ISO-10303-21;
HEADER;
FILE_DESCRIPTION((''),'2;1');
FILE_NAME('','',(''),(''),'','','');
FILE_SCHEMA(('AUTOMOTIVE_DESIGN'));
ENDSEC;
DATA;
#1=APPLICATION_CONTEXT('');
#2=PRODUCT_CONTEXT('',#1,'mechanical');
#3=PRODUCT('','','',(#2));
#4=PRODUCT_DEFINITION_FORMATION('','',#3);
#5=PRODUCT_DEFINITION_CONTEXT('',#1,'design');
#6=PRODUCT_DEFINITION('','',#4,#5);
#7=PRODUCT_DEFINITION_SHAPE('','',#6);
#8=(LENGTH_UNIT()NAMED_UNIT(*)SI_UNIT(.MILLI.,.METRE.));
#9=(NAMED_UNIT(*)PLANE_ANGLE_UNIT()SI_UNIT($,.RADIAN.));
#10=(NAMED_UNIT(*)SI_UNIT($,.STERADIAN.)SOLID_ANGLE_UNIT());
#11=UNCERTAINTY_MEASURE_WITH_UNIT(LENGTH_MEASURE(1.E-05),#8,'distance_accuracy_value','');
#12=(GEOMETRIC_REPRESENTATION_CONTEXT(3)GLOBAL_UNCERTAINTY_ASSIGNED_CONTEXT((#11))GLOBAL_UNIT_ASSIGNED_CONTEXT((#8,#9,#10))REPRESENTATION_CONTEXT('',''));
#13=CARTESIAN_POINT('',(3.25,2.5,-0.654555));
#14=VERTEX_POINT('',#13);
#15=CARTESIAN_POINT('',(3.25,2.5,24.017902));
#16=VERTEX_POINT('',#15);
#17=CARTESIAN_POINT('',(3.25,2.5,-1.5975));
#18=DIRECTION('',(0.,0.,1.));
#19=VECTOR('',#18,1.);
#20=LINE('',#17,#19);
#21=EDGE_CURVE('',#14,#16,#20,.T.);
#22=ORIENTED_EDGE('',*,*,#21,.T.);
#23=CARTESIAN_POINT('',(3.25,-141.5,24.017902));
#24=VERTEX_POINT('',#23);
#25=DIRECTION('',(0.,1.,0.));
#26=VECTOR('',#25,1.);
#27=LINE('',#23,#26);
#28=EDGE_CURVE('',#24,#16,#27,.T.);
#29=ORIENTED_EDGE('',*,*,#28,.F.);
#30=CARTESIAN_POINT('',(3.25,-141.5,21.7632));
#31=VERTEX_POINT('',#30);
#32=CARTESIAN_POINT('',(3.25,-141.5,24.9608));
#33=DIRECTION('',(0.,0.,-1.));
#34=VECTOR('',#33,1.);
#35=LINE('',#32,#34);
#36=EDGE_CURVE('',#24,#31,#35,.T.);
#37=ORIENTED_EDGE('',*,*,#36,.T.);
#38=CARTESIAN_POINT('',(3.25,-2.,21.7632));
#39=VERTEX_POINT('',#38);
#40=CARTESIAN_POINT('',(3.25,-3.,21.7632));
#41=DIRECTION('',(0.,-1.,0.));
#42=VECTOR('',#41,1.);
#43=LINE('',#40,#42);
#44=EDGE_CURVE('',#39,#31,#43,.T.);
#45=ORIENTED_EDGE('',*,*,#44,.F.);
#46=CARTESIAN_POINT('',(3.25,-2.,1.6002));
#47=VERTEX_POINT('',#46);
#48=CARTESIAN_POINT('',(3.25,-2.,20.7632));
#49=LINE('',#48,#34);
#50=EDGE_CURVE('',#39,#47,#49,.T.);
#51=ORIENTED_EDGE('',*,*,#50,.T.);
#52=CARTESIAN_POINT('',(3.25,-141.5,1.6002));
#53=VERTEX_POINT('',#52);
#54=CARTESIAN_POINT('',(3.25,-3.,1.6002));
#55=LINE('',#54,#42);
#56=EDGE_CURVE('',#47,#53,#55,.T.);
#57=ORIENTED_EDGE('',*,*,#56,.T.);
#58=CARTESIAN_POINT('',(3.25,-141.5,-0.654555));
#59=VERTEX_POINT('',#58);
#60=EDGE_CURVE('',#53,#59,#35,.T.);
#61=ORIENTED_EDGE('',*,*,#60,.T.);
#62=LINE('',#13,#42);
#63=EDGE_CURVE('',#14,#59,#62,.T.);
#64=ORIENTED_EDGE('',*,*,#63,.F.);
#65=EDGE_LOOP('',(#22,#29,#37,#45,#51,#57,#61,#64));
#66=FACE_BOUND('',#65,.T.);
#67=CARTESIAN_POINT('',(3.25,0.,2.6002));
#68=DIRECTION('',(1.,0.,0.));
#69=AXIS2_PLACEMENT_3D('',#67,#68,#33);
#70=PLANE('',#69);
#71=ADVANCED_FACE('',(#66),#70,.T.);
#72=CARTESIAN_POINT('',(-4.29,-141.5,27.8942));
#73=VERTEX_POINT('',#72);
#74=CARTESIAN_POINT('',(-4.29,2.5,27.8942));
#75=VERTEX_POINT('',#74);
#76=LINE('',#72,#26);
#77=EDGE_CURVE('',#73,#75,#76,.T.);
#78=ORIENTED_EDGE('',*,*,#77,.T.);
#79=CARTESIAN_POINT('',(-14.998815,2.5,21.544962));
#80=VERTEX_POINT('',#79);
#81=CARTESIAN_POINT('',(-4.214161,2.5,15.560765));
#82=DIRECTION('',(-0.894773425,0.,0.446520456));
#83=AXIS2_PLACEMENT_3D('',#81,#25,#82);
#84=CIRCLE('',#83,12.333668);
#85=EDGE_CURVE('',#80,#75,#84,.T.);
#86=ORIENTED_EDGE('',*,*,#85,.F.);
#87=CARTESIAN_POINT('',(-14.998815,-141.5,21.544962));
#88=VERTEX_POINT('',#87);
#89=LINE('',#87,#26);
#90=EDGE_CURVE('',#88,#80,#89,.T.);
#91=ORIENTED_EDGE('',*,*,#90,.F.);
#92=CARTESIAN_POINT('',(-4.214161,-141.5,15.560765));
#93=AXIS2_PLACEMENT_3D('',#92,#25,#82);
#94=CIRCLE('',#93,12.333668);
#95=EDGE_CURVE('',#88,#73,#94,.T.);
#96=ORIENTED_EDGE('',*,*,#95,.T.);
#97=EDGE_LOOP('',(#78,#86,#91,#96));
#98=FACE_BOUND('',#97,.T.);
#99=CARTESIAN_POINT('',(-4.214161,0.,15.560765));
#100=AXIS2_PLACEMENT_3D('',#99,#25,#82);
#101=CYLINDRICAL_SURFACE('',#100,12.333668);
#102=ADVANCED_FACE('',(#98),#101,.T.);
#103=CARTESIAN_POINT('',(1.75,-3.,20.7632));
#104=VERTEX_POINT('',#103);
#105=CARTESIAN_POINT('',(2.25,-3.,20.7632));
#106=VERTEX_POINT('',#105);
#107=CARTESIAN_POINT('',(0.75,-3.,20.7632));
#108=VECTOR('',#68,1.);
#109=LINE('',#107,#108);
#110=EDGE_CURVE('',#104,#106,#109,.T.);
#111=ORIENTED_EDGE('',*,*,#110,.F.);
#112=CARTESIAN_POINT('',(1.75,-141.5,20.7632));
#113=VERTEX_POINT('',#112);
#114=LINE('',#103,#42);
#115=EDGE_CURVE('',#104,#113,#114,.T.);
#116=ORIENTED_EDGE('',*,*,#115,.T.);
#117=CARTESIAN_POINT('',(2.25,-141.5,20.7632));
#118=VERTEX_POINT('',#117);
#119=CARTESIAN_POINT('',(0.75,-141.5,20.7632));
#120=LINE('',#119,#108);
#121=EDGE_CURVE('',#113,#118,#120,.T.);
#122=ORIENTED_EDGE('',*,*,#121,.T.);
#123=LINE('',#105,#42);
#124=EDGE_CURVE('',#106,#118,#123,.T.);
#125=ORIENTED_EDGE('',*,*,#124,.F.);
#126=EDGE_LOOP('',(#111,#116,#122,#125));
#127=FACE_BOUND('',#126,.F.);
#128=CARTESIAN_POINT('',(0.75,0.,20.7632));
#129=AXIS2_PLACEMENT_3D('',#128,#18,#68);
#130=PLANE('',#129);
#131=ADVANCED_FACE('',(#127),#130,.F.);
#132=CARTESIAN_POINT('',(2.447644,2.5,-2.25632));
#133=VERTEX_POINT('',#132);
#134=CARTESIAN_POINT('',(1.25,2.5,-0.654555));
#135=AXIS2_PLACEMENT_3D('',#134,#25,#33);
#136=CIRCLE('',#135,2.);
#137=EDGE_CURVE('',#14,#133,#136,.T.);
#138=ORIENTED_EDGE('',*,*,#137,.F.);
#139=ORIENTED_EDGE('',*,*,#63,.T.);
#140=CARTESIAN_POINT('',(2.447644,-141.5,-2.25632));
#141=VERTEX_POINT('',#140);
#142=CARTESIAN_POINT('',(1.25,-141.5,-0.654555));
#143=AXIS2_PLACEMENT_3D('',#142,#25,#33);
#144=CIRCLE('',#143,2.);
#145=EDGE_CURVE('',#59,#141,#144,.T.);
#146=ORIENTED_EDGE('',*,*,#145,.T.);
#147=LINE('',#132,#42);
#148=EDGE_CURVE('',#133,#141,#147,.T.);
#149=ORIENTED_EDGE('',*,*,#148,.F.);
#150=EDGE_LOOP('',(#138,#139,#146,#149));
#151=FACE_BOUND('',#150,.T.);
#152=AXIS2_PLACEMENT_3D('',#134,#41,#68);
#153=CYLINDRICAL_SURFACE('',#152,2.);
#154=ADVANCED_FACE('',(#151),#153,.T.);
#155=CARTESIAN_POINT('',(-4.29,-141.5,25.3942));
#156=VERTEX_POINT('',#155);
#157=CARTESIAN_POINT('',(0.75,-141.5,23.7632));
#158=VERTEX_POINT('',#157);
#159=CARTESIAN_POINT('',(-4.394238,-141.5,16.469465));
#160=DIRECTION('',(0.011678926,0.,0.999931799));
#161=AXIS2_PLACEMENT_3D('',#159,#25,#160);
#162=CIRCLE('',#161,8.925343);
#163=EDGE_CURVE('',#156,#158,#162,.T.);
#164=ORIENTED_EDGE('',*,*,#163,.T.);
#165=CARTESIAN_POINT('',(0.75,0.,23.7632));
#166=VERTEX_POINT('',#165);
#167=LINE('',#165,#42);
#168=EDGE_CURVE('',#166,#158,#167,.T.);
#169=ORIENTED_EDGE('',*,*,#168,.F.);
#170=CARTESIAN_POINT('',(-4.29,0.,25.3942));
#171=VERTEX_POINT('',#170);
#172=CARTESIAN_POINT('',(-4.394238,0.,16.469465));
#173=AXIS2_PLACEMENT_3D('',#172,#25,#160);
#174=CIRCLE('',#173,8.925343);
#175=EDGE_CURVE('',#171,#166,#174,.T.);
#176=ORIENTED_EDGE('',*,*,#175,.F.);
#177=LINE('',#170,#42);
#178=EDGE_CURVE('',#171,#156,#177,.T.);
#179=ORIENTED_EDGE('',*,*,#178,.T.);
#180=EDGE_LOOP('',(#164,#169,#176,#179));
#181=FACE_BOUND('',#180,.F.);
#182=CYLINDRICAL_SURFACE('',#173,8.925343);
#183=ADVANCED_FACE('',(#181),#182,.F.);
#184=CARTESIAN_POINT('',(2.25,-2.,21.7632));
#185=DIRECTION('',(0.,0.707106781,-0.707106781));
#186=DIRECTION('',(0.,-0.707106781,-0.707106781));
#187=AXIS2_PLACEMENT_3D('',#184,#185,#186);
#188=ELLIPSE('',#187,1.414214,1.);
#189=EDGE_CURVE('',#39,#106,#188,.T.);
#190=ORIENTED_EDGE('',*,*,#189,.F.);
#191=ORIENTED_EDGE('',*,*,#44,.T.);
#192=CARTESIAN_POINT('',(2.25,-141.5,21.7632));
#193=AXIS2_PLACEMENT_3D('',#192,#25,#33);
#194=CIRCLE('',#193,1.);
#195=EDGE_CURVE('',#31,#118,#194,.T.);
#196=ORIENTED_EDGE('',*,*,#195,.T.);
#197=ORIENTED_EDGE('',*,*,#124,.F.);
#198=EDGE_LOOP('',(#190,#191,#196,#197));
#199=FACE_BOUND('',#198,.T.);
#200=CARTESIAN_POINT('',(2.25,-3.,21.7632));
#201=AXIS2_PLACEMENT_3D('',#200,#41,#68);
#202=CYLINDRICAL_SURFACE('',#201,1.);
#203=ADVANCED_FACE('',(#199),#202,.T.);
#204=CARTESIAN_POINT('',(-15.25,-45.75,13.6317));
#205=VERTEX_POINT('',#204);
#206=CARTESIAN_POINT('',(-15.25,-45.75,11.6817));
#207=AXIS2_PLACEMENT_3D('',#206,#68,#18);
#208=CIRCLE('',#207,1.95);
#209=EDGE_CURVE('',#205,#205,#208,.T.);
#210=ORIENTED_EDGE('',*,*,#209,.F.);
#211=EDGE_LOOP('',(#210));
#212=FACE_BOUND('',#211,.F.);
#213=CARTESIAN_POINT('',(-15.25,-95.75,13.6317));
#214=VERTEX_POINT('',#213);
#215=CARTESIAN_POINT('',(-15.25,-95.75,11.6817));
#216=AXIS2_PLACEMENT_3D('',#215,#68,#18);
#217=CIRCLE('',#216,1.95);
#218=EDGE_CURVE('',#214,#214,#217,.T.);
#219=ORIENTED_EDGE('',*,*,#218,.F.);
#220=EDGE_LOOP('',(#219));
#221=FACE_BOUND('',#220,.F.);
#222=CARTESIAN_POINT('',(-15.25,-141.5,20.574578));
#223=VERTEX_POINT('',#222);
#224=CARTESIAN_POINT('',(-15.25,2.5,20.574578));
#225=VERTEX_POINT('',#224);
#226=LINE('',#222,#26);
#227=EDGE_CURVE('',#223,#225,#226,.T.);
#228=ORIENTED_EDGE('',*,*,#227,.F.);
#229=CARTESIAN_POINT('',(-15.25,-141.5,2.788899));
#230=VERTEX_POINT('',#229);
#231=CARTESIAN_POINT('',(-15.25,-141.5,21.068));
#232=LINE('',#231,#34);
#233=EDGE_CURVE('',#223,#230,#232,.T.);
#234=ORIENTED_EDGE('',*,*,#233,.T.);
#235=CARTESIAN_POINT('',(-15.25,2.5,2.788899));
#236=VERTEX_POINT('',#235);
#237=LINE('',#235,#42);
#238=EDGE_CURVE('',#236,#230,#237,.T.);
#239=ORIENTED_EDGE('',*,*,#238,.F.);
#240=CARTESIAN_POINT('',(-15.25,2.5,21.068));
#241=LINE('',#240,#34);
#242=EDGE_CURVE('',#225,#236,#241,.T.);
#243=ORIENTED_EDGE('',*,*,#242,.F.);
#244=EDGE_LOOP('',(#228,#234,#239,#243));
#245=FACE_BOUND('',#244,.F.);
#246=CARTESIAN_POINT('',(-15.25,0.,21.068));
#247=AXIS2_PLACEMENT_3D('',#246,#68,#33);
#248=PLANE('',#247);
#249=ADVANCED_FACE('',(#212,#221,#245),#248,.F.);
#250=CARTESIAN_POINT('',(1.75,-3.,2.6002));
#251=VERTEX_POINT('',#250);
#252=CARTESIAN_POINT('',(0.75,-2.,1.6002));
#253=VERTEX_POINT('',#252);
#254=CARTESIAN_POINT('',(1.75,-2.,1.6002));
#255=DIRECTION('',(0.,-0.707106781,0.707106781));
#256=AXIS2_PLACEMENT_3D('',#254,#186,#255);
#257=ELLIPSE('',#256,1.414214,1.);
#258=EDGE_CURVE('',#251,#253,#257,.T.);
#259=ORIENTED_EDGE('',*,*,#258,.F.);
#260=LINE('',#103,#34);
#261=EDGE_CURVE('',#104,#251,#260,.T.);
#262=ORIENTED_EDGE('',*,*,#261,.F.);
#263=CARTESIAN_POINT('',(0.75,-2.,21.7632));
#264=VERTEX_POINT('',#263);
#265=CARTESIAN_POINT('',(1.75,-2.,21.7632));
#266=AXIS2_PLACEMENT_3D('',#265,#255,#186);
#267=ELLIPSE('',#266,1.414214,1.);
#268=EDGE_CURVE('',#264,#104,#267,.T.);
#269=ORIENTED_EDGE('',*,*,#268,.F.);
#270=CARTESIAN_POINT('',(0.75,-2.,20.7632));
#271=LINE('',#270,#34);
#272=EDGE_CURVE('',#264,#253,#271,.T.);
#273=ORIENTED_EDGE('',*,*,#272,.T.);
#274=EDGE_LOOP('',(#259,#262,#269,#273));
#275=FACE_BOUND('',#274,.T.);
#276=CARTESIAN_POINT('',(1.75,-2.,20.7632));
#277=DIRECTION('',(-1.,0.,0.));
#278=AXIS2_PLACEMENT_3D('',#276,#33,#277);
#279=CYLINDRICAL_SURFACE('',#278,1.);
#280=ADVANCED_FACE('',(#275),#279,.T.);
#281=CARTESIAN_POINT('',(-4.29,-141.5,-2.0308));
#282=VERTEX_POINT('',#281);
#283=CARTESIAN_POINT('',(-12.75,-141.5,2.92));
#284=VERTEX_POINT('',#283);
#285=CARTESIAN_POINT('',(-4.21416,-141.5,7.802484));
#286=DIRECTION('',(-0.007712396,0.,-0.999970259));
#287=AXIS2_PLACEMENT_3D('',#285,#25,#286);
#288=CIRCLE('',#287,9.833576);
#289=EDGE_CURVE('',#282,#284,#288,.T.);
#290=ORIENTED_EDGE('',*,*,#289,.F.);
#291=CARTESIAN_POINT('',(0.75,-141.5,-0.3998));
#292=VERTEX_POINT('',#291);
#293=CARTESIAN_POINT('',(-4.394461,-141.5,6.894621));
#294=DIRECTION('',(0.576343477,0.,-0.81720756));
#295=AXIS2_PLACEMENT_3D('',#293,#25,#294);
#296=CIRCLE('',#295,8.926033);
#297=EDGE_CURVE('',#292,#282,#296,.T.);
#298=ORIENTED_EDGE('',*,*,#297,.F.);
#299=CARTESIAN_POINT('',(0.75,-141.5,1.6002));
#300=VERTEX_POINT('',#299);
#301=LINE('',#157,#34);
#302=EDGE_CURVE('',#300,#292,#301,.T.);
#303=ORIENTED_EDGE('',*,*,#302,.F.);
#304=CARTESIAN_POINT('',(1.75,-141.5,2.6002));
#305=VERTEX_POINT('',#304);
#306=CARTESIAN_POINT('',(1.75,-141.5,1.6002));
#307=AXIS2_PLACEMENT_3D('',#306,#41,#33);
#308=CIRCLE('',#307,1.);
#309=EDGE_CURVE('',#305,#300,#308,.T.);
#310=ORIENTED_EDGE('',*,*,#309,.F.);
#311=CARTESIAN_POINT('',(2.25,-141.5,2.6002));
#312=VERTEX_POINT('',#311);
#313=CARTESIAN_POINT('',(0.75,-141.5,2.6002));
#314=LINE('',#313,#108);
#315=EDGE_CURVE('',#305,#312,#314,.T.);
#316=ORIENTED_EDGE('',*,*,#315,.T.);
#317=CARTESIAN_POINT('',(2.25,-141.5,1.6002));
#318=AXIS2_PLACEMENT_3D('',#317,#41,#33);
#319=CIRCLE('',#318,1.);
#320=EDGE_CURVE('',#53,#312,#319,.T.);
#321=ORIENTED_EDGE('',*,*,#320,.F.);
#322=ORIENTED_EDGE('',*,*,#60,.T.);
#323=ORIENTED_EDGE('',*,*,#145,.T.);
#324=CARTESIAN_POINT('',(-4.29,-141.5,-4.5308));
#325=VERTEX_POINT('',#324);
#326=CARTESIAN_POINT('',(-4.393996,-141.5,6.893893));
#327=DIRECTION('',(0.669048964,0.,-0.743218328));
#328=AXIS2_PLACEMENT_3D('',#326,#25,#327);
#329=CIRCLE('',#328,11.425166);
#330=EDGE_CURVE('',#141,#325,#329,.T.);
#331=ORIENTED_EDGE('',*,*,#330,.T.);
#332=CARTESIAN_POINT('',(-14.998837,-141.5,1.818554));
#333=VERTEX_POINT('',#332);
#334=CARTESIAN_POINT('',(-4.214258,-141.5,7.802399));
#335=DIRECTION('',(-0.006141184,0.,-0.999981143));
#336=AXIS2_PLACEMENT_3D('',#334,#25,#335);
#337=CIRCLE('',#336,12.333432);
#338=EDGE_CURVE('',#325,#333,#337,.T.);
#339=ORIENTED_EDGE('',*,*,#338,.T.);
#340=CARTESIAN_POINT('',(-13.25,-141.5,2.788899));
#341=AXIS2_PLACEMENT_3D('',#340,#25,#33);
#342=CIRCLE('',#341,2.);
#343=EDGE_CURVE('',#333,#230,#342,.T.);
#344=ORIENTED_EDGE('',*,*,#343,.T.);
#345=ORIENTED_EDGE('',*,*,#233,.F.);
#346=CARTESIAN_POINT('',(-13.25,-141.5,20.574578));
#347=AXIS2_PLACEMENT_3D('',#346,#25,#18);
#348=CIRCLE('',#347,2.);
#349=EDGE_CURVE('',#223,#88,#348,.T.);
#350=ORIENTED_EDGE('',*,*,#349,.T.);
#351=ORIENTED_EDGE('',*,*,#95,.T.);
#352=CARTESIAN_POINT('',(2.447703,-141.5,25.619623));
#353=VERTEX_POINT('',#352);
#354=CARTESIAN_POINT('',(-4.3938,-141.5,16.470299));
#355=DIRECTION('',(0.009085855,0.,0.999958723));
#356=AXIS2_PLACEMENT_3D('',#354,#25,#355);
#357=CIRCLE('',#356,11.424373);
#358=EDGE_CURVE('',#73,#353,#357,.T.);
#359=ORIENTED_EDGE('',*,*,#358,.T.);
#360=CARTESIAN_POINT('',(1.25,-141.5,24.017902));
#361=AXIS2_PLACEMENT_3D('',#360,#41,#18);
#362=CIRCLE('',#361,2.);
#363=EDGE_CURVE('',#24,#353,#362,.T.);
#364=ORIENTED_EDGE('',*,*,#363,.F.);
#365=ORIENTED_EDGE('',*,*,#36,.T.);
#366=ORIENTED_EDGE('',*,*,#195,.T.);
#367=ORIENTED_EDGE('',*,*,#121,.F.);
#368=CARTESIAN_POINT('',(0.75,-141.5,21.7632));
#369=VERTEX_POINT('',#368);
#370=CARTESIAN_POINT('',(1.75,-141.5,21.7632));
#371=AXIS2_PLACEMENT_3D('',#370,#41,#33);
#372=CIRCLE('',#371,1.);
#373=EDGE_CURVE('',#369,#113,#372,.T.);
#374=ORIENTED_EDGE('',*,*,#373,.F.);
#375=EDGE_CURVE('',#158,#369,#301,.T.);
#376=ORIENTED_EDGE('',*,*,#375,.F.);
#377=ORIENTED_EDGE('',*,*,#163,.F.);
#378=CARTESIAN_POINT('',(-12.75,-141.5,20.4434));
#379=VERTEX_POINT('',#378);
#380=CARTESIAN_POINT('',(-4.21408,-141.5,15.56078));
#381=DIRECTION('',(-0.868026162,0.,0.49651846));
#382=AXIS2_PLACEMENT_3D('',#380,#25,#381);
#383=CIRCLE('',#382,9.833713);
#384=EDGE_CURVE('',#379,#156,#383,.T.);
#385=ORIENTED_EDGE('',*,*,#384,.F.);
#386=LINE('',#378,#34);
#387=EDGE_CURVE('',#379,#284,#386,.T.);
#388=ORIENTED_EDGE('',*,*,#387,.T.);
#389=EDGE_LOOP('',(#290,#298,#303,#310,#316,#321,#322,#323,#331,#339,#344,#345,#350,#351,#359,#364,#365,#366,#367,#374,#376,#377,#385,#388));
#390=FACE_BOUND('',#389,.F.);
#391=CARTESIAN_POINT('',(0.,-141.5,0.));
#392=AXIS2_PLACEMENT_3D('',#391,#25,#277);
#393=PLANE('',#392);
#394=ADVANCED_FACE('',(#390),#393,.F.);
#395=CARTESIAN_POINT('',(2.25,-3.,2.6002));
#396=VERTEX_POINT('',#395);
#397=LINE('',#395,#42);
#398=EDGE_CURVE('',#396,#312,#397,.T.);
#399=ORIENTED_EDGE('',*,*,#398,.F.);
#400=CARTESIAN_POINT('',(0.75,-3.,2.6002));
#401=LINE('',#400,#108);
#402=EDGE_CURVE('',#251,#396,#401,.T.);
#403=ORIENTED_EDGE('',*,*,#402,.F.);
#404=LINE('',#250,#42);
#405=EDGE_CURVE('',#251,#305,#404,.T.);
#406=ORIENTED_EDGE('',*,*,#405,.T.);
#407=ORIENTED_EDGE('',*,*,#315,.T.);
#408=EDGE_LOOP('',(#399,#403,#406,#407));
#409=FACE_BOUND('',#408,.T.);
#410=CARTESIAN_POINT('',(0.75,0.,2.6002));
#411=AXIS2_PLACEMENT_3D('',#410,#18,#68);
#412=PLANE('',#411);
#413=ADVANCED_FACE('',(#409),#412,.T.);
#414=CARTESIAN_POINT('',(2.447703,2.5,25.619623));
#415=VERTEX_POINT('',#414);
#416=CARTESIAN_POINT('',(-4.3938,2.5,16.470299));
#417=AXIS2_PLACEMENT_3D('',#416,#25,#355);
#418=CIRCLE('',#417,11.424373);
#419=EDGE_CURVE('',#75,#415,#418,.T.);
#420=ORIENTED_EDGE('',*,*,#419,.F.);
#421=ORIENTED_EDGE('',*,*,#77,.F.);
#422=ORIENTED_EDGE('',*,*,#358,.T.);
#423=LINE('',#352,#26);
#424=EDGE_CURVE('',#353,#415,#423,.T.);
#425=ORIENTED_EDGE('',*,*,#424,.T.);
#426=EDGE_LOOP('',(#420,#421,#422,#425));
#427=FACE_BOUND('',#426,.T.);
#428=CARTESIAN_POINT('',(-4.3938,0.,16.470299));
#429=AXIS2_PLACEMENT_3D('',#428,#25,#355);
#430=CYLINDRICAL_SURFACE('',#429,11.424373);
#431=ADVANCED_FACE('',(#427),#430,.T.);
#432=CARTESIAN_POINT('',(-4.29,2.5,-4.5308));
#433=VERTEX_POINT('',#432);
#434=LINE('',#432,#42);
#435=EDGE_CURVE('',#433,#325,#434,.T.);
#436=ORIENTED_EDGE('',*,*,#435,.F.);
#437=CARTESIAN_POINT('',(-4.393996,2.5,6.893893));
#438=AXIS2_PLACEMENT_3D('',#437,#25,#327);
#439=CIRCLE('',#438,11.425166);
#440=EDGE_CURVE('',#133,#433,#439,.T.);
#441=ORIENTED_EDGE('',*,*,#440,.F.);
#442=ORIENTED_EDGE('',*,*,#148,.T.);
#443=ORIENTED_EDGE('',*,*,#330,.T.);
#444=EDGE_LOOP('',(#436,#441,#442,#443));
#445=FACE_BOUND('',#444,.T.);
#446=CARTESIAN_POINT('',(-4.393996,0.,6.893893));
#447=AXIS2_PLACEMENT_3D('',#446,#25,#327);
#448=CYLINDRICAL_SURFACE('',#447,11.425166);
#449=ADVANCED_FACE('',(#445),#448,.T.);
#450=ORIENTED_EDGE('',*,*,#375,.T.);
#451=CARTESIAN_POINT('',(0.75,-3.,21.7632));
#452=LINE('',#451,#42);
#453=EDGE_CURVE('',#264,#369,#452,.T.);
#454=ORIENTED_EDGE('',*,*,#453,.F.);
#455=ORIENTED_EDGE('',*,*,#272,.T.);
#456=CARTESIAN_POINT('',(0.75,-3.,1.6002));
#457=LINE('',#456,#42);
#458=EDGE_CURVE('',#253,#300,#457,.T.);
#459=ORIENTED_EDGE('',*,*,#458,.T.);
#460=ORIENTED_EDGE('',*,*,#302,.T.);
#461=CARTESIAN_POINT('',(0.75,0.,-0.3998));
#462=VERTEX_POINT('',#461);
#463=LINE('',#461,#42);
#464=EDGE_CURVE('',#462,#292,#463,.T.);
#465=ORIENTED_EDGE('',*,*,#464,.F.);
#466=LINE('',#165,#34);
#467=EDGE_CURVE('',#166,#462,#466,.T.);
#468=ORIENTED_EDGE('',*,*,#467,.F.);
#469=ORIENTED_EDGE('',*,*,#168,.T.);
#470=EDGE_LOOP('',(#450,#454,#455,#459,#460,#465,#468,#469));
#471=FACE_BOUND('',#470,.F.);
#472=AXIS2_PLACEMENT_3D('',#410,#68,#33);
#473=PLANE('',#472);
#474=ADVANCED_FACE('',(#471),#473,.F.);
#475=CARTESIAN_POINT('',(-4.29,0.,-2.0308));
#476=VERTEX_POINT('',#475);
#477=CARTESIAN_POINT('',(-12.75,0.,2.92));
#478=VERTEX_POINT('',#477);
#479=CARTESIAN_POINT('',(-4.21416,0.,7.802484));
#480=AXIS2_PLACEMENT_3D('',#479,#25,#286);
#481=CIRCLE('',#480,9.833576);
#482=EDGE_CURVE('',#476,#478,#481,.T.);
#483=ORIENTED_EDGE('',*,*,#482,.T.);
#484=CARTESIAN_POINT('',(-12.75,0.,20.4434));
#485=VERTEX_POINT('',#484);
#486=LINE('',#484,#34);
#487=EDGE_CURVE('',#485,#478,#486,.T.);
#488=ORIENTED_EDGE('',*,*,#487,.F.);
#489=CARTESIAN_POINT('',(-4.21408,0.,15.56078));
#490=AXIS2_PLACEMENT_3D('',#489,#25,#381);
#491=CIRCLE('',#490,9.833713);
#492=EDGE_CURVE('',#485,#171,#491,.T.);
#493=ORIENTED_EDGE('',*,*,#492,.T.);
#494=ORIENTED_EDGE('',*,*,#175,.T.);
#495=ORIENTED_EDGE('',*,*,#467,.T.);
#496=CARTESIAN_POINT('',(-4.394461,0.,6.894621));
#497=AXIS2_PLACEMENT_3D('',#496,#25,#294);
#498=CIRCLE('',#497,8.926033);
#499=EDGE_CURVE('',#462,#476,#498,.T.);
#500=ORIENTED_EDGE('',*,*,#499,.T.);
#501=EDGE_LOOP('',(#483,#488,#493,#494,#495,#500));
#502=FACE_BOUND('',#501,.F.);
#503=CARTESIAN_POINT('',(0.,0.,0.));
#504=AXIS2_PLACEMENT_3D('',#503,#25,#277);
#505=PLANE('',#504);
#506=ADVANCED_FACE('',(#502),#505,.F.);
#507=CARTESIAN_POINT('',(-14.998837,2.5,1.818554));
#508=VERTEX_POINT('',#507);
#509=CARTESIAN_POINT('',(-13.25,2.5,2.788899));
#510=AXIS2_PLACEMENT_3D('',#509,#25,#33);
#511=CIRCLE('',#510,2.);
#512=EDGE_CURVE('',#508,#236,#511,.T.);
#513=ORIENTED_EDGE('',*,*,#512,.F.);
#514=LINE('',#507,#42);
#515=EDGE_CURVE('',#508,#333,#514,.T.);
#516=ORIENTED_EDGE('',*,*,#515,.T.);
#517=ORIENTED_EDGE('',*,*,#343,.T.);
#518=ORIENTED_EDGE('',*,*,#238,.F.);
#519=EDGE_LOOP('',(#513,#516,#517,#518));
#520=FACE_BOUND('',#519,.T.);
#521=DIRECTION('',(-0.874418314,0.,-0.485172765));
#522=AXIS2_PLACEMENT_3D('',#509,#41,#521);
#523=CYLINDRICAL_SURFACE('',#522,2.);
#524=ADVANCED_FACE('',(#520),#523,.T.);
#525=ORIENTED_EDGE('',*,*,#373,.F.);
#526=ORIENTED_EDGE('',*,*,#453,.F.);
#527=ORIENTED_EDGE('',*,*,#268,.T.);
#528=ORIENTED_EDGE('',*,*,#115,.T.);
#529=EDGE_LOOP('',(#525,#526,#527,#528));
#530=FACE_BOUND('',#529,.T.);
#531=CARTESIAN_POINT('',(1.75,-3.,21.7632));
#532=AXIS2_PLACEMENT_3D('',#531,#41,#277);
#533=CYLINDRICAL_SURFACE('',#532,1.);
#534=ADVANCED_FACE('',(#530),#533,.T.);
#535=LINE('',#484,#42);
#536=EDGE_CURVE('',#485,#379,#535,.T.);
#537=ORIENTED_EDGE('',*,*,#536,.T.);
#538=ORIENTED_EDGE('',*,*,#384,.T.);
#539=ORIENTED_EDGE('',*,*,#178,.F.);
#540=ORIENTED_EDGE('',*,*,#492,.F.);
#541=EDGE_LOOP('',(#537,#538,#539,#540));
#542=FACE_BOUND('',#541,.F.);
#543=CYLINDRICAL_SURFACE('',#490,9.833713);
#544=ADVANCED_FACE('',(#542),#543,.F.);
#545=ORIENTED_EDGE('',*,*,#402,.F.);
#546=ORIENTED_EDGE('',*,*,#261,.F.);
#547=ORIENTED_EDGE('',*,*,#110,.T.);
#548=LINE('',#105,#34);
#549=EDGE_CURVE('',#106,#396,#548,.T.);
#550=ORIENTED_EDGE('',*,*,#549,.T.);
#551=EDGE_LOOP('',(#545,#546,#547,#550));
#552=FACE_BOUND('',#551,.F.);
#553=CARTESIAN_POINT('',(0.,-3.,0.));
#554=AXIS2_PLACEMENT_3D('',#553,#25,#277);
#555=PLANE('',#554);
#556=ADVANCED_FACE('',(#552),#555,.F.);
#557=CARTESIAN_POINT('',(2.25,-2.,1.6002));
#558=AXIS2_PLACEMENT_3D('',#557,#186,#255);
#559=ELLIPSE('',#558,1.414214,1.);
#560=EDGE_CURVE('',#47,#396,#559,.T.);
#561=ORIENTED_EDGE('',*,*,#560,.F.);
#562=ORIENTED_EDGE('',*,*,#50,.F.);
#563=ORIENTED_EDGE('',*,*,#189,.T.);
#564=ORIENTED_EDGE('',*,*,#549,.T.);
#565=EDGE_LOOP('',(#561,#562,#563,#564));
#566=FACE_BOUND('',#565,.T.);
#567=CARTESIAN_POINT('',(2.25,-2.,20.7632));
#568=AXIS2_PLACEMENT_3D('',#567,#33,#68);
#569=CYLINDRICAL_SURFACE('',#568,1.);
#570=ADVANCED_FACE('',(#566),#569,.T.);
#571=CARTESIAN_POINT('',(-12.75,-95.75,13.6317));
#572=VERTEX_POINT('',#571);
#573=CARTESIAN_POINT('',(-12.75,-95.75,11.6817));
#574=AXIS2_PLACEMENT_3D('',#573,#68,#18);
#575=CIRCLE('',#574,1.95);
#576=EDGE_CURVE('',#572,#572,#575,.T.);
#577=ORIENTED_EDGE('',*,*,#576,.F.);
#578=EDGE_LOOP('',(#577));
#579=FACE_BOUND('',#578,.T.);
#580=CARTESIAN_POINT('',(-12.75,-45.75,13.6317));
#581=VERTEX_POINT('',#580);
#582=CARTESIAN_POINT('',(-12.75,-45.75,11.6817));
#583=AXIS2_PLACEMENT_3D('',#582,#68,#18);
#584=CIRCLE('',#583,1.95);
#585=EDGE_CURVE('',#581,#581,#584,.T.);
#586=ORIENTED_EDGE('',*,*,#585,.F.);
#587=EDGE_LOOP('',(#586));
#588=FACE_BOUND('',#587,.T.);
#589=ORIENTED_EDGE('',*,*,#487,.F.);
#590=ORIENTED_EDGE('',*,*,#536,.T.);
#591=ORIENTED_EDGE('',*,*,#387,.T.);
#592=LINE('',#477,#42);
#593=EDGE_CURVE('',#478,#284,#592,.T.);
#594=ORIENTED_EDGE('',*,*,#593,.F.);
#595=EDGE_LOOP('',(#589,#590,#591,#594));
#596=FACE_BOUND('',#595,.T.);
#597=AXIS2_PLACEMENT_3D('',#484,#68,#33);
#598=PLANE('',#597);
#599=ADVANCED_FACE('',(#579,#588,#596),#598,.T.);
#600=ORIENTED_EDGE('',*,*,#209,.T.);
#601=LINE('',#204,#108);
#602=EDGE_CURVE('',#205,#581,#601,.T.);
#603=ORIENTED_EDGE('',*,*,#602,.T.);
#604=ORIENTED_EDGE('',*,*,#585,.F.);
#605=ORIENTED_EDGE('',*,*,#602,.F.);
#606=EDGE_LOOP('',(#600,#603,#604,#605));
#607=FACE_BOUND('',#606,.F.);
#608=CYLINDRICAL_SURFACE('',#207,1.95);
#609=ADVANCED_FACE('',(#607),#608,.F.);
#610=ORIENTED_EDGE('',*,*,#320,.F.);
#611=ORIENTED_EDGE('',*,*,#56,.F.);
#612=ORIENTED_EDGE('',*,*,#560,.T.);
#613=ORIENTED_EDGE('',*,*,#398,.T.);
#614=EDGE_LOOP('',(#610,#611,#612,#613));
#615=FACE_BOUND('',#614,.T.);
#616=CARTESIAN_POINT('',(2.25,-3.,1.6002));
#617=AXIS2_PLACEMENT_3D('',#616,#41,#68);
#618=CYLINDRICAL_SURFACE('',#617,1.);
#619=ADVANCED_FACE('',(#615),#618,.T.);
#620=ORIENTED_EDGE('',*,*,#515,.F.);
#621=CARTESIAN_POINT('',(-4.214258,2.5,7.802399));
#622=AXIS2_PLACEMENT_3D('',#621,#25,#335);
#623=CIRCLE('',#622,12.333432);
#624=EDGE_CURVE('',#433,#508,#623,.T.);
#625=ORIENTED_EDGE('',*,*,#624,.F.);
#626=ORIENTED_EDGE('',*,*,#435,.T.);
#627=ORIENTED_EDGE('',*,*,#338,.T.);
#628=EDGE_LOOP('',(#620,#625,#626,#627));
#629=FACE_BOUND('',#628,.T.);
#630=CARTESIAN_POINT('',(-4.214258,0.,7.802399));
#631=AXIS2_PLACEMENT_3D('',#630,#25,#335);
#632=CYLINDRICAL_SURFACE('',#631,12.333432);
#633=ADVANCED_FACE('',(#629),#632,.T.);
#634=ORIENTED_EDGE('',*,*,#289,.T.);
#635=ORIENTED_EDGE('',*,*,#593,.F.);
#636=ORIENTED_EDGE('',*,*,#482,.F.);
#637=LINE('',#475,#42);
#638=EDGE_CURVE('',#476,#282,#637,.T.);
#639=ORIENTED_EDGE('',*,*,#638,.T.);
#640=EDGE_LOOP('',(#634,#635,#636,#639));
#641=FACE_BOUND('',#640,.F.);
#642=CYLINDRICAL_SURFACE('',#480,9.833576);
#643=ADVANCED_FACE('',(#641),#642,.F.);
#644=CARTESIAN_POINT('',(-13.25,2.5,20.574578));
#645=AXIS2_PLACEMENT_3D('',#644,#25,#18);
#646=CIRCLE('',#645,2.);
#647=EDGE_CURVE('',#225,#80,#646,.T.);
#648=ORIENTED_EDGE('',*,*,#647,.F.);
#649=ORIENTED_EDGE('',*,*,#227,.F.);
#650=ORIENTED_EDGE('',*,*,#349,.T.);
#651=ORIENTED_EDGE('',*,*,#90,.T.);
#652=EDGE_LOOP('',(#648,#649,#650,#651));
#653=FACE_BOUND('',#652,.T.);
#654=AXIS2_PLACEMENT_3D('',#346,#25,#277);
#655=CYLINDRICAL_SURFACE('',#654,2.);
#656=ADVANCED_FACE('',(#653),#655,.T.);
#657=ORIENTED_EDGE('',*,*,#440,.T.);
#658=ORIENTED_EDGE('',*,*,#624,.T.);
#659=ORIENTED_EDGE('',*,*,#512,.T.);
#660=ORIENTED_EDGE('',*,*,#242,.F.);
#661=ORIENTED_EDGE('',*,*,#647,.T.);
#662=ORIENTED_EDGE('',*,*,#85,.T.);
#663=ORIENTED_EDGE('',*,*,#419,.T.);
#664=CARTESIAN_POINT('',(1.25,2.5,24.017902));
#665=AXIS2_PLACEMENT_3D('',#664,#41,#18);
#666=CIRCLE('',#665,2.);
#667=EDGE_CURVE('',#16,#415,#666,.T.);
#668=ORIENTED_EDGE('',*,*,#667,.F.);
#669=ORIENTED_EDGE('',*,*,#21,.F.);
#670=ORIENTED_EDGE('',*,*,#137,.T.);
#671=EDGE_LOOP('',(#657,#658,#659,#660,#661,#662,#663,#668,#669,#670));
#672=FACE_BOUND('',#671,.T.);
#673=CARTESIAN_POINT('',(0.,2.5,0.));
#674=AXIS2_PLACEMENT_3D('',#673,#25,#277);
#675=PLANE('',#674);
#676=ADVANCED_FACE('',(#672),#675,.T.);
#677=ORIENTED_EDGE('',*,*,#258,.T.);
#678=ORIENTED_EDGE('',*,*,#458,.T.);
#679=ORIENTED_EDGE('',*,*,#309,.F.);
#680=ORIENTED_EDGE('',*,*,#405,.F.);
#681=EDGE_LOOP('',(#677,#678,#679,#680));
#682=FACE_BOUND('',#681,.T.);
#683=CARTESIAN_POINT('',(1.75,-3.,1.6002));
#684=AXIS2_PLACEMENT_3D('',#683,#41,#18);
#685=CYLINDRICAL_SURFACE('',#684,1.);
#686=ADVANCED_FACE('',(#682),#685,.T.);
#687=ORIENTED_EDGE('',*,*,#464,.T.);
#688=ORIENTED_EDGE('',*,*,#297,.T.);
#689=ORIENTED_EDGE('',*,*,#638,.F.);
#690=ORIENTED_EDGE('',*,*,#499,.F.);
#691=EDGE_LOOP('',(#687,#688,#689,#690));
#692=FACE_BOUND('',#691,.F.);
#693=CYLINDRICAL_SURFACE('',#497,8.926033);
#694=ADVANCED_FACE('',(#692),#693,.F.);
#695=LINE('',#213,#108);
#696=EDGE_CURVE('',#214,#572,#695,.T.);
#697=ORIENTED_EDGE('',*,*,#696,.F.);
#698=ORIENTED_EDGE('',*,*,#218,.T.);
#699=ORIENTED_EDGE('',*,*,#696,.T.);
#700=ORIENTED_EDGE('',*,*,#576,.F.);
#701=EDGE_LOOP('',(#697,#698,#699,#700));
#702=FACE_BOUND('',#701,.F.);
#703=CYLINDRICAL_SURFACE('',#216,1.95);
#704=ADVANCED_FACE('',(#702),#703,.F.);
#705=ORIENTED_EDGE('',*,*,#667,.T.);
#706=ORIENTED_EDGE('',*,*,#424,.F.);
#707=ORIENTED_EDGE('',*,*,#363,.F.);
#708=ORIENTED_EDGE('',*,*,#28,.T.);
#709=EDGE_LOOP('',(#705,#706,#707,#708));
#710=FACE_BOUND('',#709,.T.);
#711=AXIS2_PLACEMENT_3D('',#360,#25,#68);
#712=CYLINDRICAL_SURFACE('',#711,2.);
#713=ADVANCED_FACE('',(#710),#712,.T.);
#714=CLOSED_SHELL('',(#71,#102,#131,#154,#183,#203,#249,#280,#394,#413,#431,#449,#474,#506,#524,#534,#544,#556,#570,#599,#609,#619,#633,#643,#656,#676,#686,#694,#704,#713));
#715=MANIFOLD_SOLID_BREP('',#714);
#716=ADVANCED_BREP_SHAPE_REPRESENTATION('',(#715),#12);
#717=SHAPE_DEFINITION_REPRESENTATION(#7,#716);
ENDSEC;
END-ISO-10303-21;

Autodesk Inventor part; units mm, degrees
ref_plane "YZ Plane" through (0, 0, 0) normal (1, 0, 0) x (0, 1, 0)
ref_plane "XZ Plane" through (0, 0, 0) normal (0, 1, 0) x (-1, 0, 0)
ref_plane "XY Plane" through (0, 0, 0) normal (0, 0, 1) x (1, 0, 0)
sketch "Szkic1" plane through (0, 0, 0) normal (0, 1, 0) x (-1, 0, 0)
  spline S0 degree 3 poles (4.29, 24.6442) (4.4521, 24.6442) (4.6114, 24.6406) (4.7677, 24.6336) (4.8034, 24.632) (4.8389, 24.6302) (4.8743, 24.6283) (4.9939, 24.6216) (5.1117, 24.613) (5.2279, 24.6025) (5.2909, 24.5968) (5.3533, 24.5906) (5.4152, 24.5838) (5.5016, 24.5743) (5.5869, 24.5637) (5.6714, 24.5521) (5.7603, 24.5399) (5.8483, 24.5266) (5.9352, 24.5122) (5.9902, 24.503) (6.0448, 24.4934) (6.099, 24.4834) (6.213, 24.4624) (6.3254, 24.4394) (6.4363, 24.4145) (6.4615, 24.4088) (6.4866, 24.4031) (6.5116, 24.3972) (6.6467, 24.3657) (6.7795, 24.3313) (6.9102, 24.2942) (7.0408, 24.2571) (7.1693, 24.2173) (7.2957, 24.1748) (7.3261, 24.1646) (7.3564, 24.1542) (7.3866, 24.1437) (7.4819, 24.1104) (7.576, 24.0756) (7.6691, 24.0393) (7.7261, 24.0171) (7.7827, 23.9943) (7.8389, 23.9709) (7.9035, 23.944) (7.9676, 23.9164) (8.0312, 23.888) (8.1143, 23.8509) (8.1964, 23.8125) (8.2778, 23.7729) (8.313, 23.7557) (8.348, 23.7383) (8.3829, 23.7207) (8.4915, 23.6658) (8.5987, 23.6086) (8.7045, 23.5489) (8.7113, 23.5451) (8.7181, 23.5412) (8.7249, 23.5374) (8.8374, 23.4736) (8.9484, 23.407) (9.058, 23.3376) (9.0788, 23.3245) (9.0995, 23.3112) (9.1202, 23.2979) (9.2086, 23.2408) (9.2961, 23.1819) (9.3827, 23.121) (9.4307, 23.0873) (9.4784, 23.0531) (9.5258, 23.0182) (9.5842, 22.9753) (9.6421, 22.9315) (9.6997, 22.8868) (9.7745, 22.8287) (9.8486, 22.7691) (9.9222, 22.7079) (9.9514, 22.6836) (9.9805, 22.659) (10.0095, 22.6342) (10.1116, 22.5468) (10.2126, 22.4562) (10.3125, 22.3621) (10.4124, 22.2681) (10.5112, 22.1706) (10.609, 22.0695) (10.6346, 22.043) (10.6601, 22.0163) (10.6855, 21.9894) (10.7573, 21.9132) (10.8286, 21.8351) (10.8993, 21.7548) (10.9505, 21.6966) (11.0014, 21.6374) (11.052, 21.577) (11.0961, 21.5244) (11.1399, 21.4708) (11.1836, 21.4164) (11.2594, 21.3219) (11.3345, 21.2247) (11.409, 21.1244) (11.4266, 21.1006) (11.4443, 21.0767) (11.4619, 21.0525) (11.5537, 20.9267) (11.6444, 20.7964) (11.7342, 20.661) (11.7412, 20.6503) (11.7483, 20.6396) (11.7554, 20.6289) (11.8379, 20.5035) (11.9195, 20.3738) (12, 20.2398) knots 0 0 0 0 0.045455 0.045455 0.045455 0.05583 0.05583 0.05583 0.090909 0.090909 0.090909 0.109901 0.109901 0.109901 0.136364 0.136364 0.136364 0.164215 0.164215 0.164215 0.181818 0.181818 0.181818 0.218856 0.218856 0.218856 0.227273 0.227273 0.227273 0.272727 0.272727 0.272727 0.318182 0.318182 0.318182 0.329116 0.329116 0.329116 0.363636 0.363636 0.363636 0.384782 0.384782 0.384782 0.409091 0.409091 0.409091 0.440823 0.440823 0.440823 0.454545 0.454545 0.454545 0.497251 0.497251 0.497251 0.5 0.5 0.5 0.545455 0.545455 0.545455 0.554072 0.554072 0.554072 0.590909 0.590909 0.590909 0.611291 0.611291 0.611291 0.636364 0.636364 0.636364 0.668896 0.668896 0.668896 0.681818 0.681818 0.681818 0.727273 0.727273 0.727273 0.772727 0.772727 0.772727 0.784612 0.784612 0.784612 0.818182 0.818182 0.818182 0.842477 0.842477 0.842477 0.863636 0.863636 0.863636 0.900365 0.900365 0.900365 0.909091 0.909091 0.909091 0.954545 0.954545 0.954545 0.958127 0.958127 0.958127 1 1 1 1
  spline S1 degree 3 poles (0, 23.3634) (0.0313, 23.3834) (0.0629, 23.4032) (0.0948, 23.4229) (0.1661, 23.4669) (0.2387, 23.51) (0.3127, 23.5522) (0.3366, 23.5659) (0.3606, 23.5794) (0.3848, 23.5929) (0.4689, 23.6397) (0.5548, 23.6854) (0.6428, 23.7301) (0.6619, 23.7398) (0.6811, 23.7494) (0.7004, 23.759) (0.7955, 23.8063) (0.893, 23.8524) (0.9925, 23.8971) (1.0001, 23.9005) (1.0078, 23.9039) (1.0155, 23.9073) (1.1133, 23.9508) (1.213, 23.9929) (1.3144, 24.0334) (1.3295, 24.0394) (1.3447, 24.0454) (1.3599, 24.0514) (1.4359, 24.0812) (1.5128, 24.1101) (1.5905, 24.138) (1.6407, 24.156) (1.6913, 24.1737) (1.7423, 24.1909) (1.7757, 24.2022) (1.8093, 24.2133) (1.843, 24.2243) (1.9195, 24.2491) (1.9968, 24.2731) (2.0748, 24.2961) (2.096, 24.3023) (2.1174, 24.3085) (2.1387, 24.3146) (2.1887, 24.3289) (2.2389, 24.3428) (2.2893, 24.3563) (2.3554, 24.374) (2.4218, 24.391) (2.4885, 24.4072) (2.5077, 24.4119) (2.527, 24.4165) (2.5463, 24.4211) (2.5883, 24.431) (2.6305, 24.4407) (2.6727, 24.45) (2.7293, 24.4625) (2.786, 24.4745) (2.8426, 24.4858) (2.8813, 24.4936) (2.9201, 24.5011) (2.9588, 24.5084) (2.9723, 24.5109) (2.9859, 24.5134) (2.9995, 24.5159) (3.0482, 24.5248) (3.0967, 24.5332) (3.1446, 24.5411) (3.1899, 24.5486) (3.2347, 24.5556) (3.2786, 24.5621) (3.3055, 24.5661) (3.332, 24.57) (3.3581, 24.5736) (3.373, 24.5757) (3.3878, 24.5777) (3.4024, 24.5797) (3.4415, 24.5849) (3.4798, 24.5898) (3.5172, 24.5942) (3.5534, 24.5986) (3.5889, 24.6026) (3.6237, 24.6062) (3.6534, 24.6094) (3.6826, 24.6123) (3.7112, 24.615) (3.7155, 24.6154) (3.7198, 24.6158) (3.724, 24.6162) (3.7577, 24.6193) (3.7907, 24.6221) (3.823, 24.6246) (3.8575, 24.6273) (3.8912, 24.6297) (3.9242, 24.6318) (3.9568, 24.6339) (3.9888, 24.6357) (4.0201, 24.6372) (4.0561, 24.639) (4.0912, 24.6404) (4.1254, 24.6415) (4.1561, 24.6425) (4.186, 24.6432) (4.2153, 24.6436) (4.2407, 24.644) (4.2656, 24.6442) (4.29, 24.6442) knots 0 0 0 0 0.025747 0.025747 0.025747 0.083333 0.083333 0.083333 0.101932 0.101932 0.101932 0.166667 0.166667 0.166667 0.180728 0.180728 0.180728 0.25 0.25 0.25 0.255325 0.255325 0.255325 0.323187 0.323187 0.323187 0.333333 0.333333 0.333333 0.383956 0.383956 0.383956 0.416667 0.416667 0.416667 0.438102 0.438102 0.438102 0.486742 0.486742 0.486742 0.5 0.5 0.5 0.531015 0.531015 0.531015 0.571623 0.571623 0.571623 0.583333 0.583333 0.583333 0.608888 0.608888 0.608888 0.643164 0.643164 0.643164 0.666667 0.666667 0.666667 0.674925 0.674925 0.674925 0.704638 0.704638 0.704638 0.732781 0.732781 0.732781 0.75 0.75 0.75 0.759817 0.759817 0.759817 0.786075 0.786075 0.786075 0.811555 0.811555 0.811555 0.833333 0.833333 0.833333 0.836565 0.836565 0.836565 0.86226 0.86226 0.86226 0.889614 0.889614 0.889614 0.916667 0.916667 0.916667 0.947785 0.947785 0.947785 0.975695 0.975695 0.975695 1 1 1 1
  line L0 (0, 23.3634) -> (0, 0)
  spline S2 degree 3 poles (4.29, -1.2808) (4.2555, -1.2808) (4.2199, -1.2804) (4.1832, -1.2796) (4.15, -1.2789) (4.1159, -1.2779) (4.081, -1.2765) (4.0607, -1.2757) (4.0401, -1.2748) (4.0192, -1.2737) (4.0064, -1.2731) (3.9935, -1.2724) (3.9804, -1.2717) (3.948, -1.2699) (3.9149, -1.2678) (3.881, -1.2655) (3.8471, -1.2631) (3.8125, -1.2604) (3.7771, -1.2574) (3.7548, -1.2555) (3.7322, -1.2535) (3.7093, -1.2513) (3.6944, -1.2499) (3.6793, -1.2485) (3.664, -1.2469) (3.6238, -1.2429) (3.5825, -1.2385) (3.5402, -1.2335) (3.496, -1.2284) (3.4506, -1.2227) (3.4039, -1.2164) (3.3878, -1.2143) (3.3716, -1.2121) (3.3552, -1.2098) (3.322, -1.2051) (3.2881, -1.2002) (3.2538, -1.1949) (3.1998, -1.1867) (3.1445, -1.1778) (3.0886, -1.1682) (3.0444, -1.1606) (2.9999, -1.1526) (2.9552, -1.1443) (2.9389, -1.1412) (2.9225, -1.1381) (2.9062, -1.1349) (2.8392, -1.122) (2.7721, -1.1082) (2.7051, -1.0937) (2.6511, -1.0819) (2.5971, -1.0696) (2.5432, -1.0569) (2.5237, -1.0523) (2.5042, -1.0476) (2.4847, -1.0428) (2.4029, -1.0229) (2.3215, -1.0019) (2.2408, -0.9798) (2.2058, -0.9702) (2.1709, -0.9604) (2.1362, -0.9505) (2.0792, -0.9341) (2.0226, -0.9173) (1.9664, -0.8999) (1.8903, -0.8764) (1.8149, -0.8521) (1.7404, -0.8268) (1.7134, -0.8177) (1.6866, -0.8084) (1.6598, -0.7991) (1.5579, -0.7635) (1.4574, -0.7262) (1.3585, -0.6874) (1.3491, -0.6837) (1.3397, -0.68) (1.3303, -0.6762) (1.2151, -0.6306) (1.102, -0.5828) (0.9914, -0.5331) (0.8892, -0.4873) (0.7891, -0.4398) (0.6916, -0.3912) (0.675, -0.3829) (0.6585, -0.3746) (0.642, -0.3662) (0.5634, -0.3263) (0.4865, -0.2856) (0.4111, -0.244) (0.3779, -0.2257) (0.3451, -0.2073) (0.3125, -0.1887) (0.2537, -0.1551) (0.1957, -0.1209) (0.1385, -0.0862) (0.0918, -0.0578) (0.0456, -0.0291) (0, 0) knots 0 0 0 0 0.034308 0.034308 0.034308 0.065329 0.065329 0.065329 0.083333 0.083333 0.083333 0.094376 0.094376 0.094376 0.121838 0.121838 0.121838 0.149346 0.149346 0.149346 0.166667 0.166667 0.166667 0.177988 0.177988 0.177988 0.207919 0.207919 0.207919 0.239209 0.239209 0.239209 0.25 0.25 0.25 0.271822 0.271822 0.271822 0.306177 0.306177 0.306177 0.333333 0.333333 0.333333 0.343269 0.343269 0.343269 0.383905 0.383905 0.383905 0.416667 0.416667 0.416667 0.428546 0.428546 0.428546 0.478409 0.478409 0.478409 0.5 0.5 0.5 0.535413 0.535413 0.535413 0.583333 0.583333 0.583333 0.60065 0.60065 0.60065 0.666667 0.666667 0.666667 0.672941 0.672941 0.672941 0.75 0.75 0.75 0.821219 0.821219 0.821219 0.833333 0.833333 0.833333 0.891251 0.891251 0.891251 0.916667 0.916667 0.916667 0.962519 0.962519 0.962519 1 1 1 1
  spline S3 degree 3 poles (12, 3.1236) (11.9126, 2.9781) (11.7351, 2.6973) (11.4629, 2.3063) (11.1845, 1.9427) (10.9003, 1.6047) (10.61, 1.2902) (10.3135, 0.9978) (10.0106, 0.726) (9.7008, 0.4735) (9.3839, 0.2395) (9.0593, 0.0229) (8.7263, -0.1767) (8.3844, -0.36) (8.0328, -0.5272) (7.6709, -0.6786) (7.2976, -0.814) (6.9122, -0.9335) (6.5138, -1.0366) (6.1013, -1.1229) (5.674, -1.1918) (5.2306, -1.2423) (4.7705, -1.2736) (4.4521, -1.2808) (4.29, -1.2808) knots 0 0 0 0 0.045455 0.090909 0.136364 0.181818 0.227273 0.272727 0.318182 0.363636 0.409091 0.454545 0.5 0.545455 0.590909 0.636364 0.681818 0.727273 0.772727 0.818182 0.863636 0.909091 0.954545 1 1 1 1
  line L1 (12, 3.1236) -> (12, 20.2398)
  line L2 (15.25, 21.068) -> (15.25, 2.2955)
  line L3 (-3.25, 24.9608) -> (-3.25, -1.5975)
  line L4 (12.75, 20.4434) -> (12.75, 2.92)
  line L5 (-0.75, 23.7632) -> (-0.75, -0.3998)
  arc A0 (4.29, -2.0308) -> (12.75, 2.92) centre (4.2141, 7.8027) ccw
  arc A1 (-0.75, -0.3998) -> (4.29, -2.0308) centre (4.3944, 6.8945) ccw
  line L6 (0, 0) -> (-0.4031, -0.6325) construction
  line L7 (12, 3.1236) -> (12.6428, 2.7373) construction
  arc A2 (12.75, 20.4434) -> (4.29, 25.3942) centre (4.2141, 15.5608) ccw
  arc A3 (4.29, 25.3942) -> (-0.75, 23.7632) centre (4.3942, 16.4697) ccw
  line L8 (12, 20.2398) -> (12.6428, 20.6262) construction
  line L9 (0, 23.3634) -> (-0.4031, 23.9959) construction
  arc A4 (4.29, -4.5308) -> (15.25, 2.2955) centre (4.2142, 7.8026) ccw
  arc A5 (-3.25, -1.5975) -> (4.29, -4.5308) centre (4.394, 6.8939) ccw
  arc A6 (15.25, 21.068) -> (4.29, 27.8942) centre (4.2142, 15.5608) ccw
  arc A7 (4.29, 27.8942) -> (-3.25, 24.9608) centre (4.3938, 16.4703) ccw
  line L10 (12.6428, 2.7373) -> (14.7857, 1.4495) construction
  line L11 (12.75, 20.4434) -> (14.9201, 21.6847) construction
  line L12 (-0.75, 23.7632) -> (-2.1909, 25.8062) construction
  line L13 (-0.75, -0.3998) -> (-2.1909, -2.4428) construction
  line L14 (-0.75, 2.6002) -> (-3.25, 2.6002)
  line L15 (-0.75, 20.7632) -> (-3.25, 20.7632)
  point P0 (0, 0)
  point P1 (0, 11.6817)
  dimension "d8" = 0.75
  dimension "d9" = 0.75
  dimension "d14" = 0.75
  dimension "d15" = 0.75
  dimension "d16" = 0.75
  dimension "d17" = 0.75
  dimension "d18" = 0.75
  dimension "d19" = 0.75
  dimension "d20" = 2.5
  dimension "d21" = 2.5
  dimension "d22" = 2.5
  dimension "d23" = 2.5
  dimension "d24" = 2.5
  dimension "d25" = 2.5
  dimension "d26" = 2.5
  dimension "d28" = 2.5
  dimension "d29" = 3
  dimension "d30" = 3
extrude "Wyciągnięcie proste2" add sketch "Szkic1" along normal blind 2.5 contours S0 L1 S3 S2 L0 S1 | L2 A4 A5 L3 L14 L5 A1 A0 L4 A2 A3 L15 A7 A6 | L15 L5 L14 L3 | L5 A3 A2 L4 A0 A1
extrude "Wyciągnięcie proste3" add sketch "Szkic1" against normal blind 3 contours L15 L5 L14 L3
extrude "Wyciągnięcie proste4" add sketch "Szkic1" against normal blind 141.5 contours L2 A4 A5 L3 L14 L5 A1 A0 L4 A2 A3 L15 A7 A6
fillet "Zaokrąglenie1" radius 1 6 edges at (3.25, -72.25, 20.7632) (3.25, -72.25, 2.6002) (0.75, -72.25, 2.6002) (0.75, -72.25, 20.7632) (0.75, -3, 11.6817) (3.25, -3, 11.6817)
fillet "Zaokrąglenie2" radius 2 4 edges at (3.25, -69.5, 24.9608) (3.25, -69.5, -1.5975) (-15.25, -69.5, 2.2955) (-15.25, -69.5, 21.068)
sketch "Szkic2" plane through (-15.25, -141.5, 20.5746) normal (-1, 0, 0) x (0, 0, 1)
  line L0 (0, 144) -> (0, 0) projected
  line L1 (-17.7857, 144) -> (0, 144) projected
  line L2 (-17.7857, 0) -> (-17.7857, 144) projected
  line L3 (0, 0) -> (-17.7857, 0) projected
  line L4 (-0.1311, 141.5) -> (-17.6546, 141.5) projected
  point P0 (-20.5746, 141.5)
  point P1 (-8.8929, 70.75)
  point P2 (-8.8929, 95.75)
  point P3 (-8.8929, 45.75)
  dimension "d39" = 70.75
  dimension "d40" = 8.8929
  dimension "d41" = 17.7857
  dimension "d42" = 25
  dimension "d43" = 50
hole "Otwór1" at (-15.25, -45.75, 11.6817) at (-15.25, -95.75, 11.6817) direction (1, 0, 0) diameter 3.9 depth 8 tip angle 118 clearance for "Śruba ze łbem płaskim obrobiona" size "M3.5" standard "ANSI Profil metryczny M"
sketch "Szkic3" plane through (0, -141.5, 0) normal (0, -1, 0) x (1, 0, 0)
  arc A0 (-4.29, 25.3942) -> (-12.75, 20.4434) centre (-4.2141, 15.5608) ccw projected
  arc A1 (-4.29, 27.8942) -> (-14.9988, 21.545) centre (-4.2142, 15.5608) ccw projected
  arc A2 (-14.9988, 21.545) -> (-15.25, 20.5746) centre (-13.25, 20.5746) ccw projected
  line L0 (-15.25, 20.5746) -> (-15.25, 2.7889) projected
  arc A3 (-15.25, 2.7889) -> (-14.9988, 1.8185) centre (-13.25, 2.7889) ccw projected
  arc A4 (-14.9988, 1.8185) -> (-4.29, -4.5308) centre (-4.2142, 7.8026) ccw projected
  arc A5 (-4.29, -4.5308) -> (2.4476, -2.2563) centre (-4.394, 6.8939) ccw projected
  arc A6 (2.4476, -2.2563) -> (3.25, -0.6545) centre (1.25, -0.6545) ccw projected
  line L1 (3.25, -0.6545) -> (3.25, 1.6002) projected
  arc A7 (3.25, 1.6002) -> (2.25, 2.6002) centre (2.25, 1.6002) ccw projected
  line L2 (2.25, 2.6002) -> (1.75, 2.6002) projected
  arc A8 (1.75, 2.6002) -> (0.75, 1.6002) centre (1.75, 1.6002) ccw projected
  line L3 (0.75, 1.6002) -> (0.75, -0.3998) projected
  arc A9 (-4.29, -2.0308) -> (0.75, -0.3998) centre (-4.3944, 6.8945) ccw projected
  arc A10 (-12.75, 2.92) -> (-4.29, -2.0308) centre (-4.2141, 7.8027) ccw projected
  line L4 (-12.75, 2.92) -> (-12.75, 20.4434) projected
  arc A11 (-4.29, 25.3942) -> (-12.75, 20.4434) centre (-4.2141, 15.5608) ccw projected
  arc A12 (0.75, 23.7632) -> (-4.29, 25.3942) centre (-4.3942, 16.4697) ccw projected
  line L5 (0.75, 23.7632) -> (0.75, 21.7632) projected
  arc A13 (0.75, 21.7632) -> (1.75, 20.7632) centre (1.75, 21.7632) ccw projected
  line L6 (1.75, 20.7632) -> (2.25, 20.7632) projected
  arc A14 (2.25, 20.7632) -> (3.25, 21.7632) centre (2.25, 21.7632) ccw projected
  line L7 (3.25, 21.7632) -> (3.25, 24.0179) projected
  arc A15 (3.25, 24.0179) -> (2.4477, 25.6197) centre (1.25, 24.0179) ccw projected
  arc A16 (2.4477, 25.6197) -> (-4.29, 27.8942) centre (-4.3938, 16.4703) ccw projected
  arc A17 (-4.29, 27.8942) -> (-14.9988, 21.545) centre (-4.2142, 15.5608) ccw projected
  point P0 (0, 0)
equation "\"d8\" = blad_kurczenia"
equation "\"d9\" = d8"
equation "\"d14\" = d9"
equation "\"d15\" = d8"
equation "\"d16\" = d9"
equation "\"d17\" = d14"
equation "\"d18\" = d17"
equation "\"d19\" = d17"
equation "\"d20\" = gr_scianki"
equation "\"d21\" = d20"
equation "\"d22\" = d20"
equation "\"d23\" = d21"
equation "\"d24\" = d20"
equation "\"d25\" = d21"
equation "\"d26\" = d23"
equation "\"d28\" = d22"
equation "\"d29\" = dlg_ogranicznikowi"
equation "\"d30\" = d29"
equation "\"d31\" = gr_scianki"
equation "\"d33\" = dlg_ogranicznikowi"
equation "\"d35\" = dlg_kamery + 2 * blad_kurczenia"
equation "\"d39\" = 0.5 * dlg_kamery + blad_kurczenia"
equation "\"d40\" = 0.5 * d41"
equation "\"d42\" = 0.5 * d43"
equation "\"d43\" = rozstaw_otw"
equation "\"gr_scianki\" = 2.5"
equation "\"blad_kurczenia\" = 0.75"
equation "\"dlg_ogranicznikowi\" = 3"
equation "\"rozstaw_otw\" = 50"
equation "\"dlg_kamery\" = 140"
properties part number "obudowa"
